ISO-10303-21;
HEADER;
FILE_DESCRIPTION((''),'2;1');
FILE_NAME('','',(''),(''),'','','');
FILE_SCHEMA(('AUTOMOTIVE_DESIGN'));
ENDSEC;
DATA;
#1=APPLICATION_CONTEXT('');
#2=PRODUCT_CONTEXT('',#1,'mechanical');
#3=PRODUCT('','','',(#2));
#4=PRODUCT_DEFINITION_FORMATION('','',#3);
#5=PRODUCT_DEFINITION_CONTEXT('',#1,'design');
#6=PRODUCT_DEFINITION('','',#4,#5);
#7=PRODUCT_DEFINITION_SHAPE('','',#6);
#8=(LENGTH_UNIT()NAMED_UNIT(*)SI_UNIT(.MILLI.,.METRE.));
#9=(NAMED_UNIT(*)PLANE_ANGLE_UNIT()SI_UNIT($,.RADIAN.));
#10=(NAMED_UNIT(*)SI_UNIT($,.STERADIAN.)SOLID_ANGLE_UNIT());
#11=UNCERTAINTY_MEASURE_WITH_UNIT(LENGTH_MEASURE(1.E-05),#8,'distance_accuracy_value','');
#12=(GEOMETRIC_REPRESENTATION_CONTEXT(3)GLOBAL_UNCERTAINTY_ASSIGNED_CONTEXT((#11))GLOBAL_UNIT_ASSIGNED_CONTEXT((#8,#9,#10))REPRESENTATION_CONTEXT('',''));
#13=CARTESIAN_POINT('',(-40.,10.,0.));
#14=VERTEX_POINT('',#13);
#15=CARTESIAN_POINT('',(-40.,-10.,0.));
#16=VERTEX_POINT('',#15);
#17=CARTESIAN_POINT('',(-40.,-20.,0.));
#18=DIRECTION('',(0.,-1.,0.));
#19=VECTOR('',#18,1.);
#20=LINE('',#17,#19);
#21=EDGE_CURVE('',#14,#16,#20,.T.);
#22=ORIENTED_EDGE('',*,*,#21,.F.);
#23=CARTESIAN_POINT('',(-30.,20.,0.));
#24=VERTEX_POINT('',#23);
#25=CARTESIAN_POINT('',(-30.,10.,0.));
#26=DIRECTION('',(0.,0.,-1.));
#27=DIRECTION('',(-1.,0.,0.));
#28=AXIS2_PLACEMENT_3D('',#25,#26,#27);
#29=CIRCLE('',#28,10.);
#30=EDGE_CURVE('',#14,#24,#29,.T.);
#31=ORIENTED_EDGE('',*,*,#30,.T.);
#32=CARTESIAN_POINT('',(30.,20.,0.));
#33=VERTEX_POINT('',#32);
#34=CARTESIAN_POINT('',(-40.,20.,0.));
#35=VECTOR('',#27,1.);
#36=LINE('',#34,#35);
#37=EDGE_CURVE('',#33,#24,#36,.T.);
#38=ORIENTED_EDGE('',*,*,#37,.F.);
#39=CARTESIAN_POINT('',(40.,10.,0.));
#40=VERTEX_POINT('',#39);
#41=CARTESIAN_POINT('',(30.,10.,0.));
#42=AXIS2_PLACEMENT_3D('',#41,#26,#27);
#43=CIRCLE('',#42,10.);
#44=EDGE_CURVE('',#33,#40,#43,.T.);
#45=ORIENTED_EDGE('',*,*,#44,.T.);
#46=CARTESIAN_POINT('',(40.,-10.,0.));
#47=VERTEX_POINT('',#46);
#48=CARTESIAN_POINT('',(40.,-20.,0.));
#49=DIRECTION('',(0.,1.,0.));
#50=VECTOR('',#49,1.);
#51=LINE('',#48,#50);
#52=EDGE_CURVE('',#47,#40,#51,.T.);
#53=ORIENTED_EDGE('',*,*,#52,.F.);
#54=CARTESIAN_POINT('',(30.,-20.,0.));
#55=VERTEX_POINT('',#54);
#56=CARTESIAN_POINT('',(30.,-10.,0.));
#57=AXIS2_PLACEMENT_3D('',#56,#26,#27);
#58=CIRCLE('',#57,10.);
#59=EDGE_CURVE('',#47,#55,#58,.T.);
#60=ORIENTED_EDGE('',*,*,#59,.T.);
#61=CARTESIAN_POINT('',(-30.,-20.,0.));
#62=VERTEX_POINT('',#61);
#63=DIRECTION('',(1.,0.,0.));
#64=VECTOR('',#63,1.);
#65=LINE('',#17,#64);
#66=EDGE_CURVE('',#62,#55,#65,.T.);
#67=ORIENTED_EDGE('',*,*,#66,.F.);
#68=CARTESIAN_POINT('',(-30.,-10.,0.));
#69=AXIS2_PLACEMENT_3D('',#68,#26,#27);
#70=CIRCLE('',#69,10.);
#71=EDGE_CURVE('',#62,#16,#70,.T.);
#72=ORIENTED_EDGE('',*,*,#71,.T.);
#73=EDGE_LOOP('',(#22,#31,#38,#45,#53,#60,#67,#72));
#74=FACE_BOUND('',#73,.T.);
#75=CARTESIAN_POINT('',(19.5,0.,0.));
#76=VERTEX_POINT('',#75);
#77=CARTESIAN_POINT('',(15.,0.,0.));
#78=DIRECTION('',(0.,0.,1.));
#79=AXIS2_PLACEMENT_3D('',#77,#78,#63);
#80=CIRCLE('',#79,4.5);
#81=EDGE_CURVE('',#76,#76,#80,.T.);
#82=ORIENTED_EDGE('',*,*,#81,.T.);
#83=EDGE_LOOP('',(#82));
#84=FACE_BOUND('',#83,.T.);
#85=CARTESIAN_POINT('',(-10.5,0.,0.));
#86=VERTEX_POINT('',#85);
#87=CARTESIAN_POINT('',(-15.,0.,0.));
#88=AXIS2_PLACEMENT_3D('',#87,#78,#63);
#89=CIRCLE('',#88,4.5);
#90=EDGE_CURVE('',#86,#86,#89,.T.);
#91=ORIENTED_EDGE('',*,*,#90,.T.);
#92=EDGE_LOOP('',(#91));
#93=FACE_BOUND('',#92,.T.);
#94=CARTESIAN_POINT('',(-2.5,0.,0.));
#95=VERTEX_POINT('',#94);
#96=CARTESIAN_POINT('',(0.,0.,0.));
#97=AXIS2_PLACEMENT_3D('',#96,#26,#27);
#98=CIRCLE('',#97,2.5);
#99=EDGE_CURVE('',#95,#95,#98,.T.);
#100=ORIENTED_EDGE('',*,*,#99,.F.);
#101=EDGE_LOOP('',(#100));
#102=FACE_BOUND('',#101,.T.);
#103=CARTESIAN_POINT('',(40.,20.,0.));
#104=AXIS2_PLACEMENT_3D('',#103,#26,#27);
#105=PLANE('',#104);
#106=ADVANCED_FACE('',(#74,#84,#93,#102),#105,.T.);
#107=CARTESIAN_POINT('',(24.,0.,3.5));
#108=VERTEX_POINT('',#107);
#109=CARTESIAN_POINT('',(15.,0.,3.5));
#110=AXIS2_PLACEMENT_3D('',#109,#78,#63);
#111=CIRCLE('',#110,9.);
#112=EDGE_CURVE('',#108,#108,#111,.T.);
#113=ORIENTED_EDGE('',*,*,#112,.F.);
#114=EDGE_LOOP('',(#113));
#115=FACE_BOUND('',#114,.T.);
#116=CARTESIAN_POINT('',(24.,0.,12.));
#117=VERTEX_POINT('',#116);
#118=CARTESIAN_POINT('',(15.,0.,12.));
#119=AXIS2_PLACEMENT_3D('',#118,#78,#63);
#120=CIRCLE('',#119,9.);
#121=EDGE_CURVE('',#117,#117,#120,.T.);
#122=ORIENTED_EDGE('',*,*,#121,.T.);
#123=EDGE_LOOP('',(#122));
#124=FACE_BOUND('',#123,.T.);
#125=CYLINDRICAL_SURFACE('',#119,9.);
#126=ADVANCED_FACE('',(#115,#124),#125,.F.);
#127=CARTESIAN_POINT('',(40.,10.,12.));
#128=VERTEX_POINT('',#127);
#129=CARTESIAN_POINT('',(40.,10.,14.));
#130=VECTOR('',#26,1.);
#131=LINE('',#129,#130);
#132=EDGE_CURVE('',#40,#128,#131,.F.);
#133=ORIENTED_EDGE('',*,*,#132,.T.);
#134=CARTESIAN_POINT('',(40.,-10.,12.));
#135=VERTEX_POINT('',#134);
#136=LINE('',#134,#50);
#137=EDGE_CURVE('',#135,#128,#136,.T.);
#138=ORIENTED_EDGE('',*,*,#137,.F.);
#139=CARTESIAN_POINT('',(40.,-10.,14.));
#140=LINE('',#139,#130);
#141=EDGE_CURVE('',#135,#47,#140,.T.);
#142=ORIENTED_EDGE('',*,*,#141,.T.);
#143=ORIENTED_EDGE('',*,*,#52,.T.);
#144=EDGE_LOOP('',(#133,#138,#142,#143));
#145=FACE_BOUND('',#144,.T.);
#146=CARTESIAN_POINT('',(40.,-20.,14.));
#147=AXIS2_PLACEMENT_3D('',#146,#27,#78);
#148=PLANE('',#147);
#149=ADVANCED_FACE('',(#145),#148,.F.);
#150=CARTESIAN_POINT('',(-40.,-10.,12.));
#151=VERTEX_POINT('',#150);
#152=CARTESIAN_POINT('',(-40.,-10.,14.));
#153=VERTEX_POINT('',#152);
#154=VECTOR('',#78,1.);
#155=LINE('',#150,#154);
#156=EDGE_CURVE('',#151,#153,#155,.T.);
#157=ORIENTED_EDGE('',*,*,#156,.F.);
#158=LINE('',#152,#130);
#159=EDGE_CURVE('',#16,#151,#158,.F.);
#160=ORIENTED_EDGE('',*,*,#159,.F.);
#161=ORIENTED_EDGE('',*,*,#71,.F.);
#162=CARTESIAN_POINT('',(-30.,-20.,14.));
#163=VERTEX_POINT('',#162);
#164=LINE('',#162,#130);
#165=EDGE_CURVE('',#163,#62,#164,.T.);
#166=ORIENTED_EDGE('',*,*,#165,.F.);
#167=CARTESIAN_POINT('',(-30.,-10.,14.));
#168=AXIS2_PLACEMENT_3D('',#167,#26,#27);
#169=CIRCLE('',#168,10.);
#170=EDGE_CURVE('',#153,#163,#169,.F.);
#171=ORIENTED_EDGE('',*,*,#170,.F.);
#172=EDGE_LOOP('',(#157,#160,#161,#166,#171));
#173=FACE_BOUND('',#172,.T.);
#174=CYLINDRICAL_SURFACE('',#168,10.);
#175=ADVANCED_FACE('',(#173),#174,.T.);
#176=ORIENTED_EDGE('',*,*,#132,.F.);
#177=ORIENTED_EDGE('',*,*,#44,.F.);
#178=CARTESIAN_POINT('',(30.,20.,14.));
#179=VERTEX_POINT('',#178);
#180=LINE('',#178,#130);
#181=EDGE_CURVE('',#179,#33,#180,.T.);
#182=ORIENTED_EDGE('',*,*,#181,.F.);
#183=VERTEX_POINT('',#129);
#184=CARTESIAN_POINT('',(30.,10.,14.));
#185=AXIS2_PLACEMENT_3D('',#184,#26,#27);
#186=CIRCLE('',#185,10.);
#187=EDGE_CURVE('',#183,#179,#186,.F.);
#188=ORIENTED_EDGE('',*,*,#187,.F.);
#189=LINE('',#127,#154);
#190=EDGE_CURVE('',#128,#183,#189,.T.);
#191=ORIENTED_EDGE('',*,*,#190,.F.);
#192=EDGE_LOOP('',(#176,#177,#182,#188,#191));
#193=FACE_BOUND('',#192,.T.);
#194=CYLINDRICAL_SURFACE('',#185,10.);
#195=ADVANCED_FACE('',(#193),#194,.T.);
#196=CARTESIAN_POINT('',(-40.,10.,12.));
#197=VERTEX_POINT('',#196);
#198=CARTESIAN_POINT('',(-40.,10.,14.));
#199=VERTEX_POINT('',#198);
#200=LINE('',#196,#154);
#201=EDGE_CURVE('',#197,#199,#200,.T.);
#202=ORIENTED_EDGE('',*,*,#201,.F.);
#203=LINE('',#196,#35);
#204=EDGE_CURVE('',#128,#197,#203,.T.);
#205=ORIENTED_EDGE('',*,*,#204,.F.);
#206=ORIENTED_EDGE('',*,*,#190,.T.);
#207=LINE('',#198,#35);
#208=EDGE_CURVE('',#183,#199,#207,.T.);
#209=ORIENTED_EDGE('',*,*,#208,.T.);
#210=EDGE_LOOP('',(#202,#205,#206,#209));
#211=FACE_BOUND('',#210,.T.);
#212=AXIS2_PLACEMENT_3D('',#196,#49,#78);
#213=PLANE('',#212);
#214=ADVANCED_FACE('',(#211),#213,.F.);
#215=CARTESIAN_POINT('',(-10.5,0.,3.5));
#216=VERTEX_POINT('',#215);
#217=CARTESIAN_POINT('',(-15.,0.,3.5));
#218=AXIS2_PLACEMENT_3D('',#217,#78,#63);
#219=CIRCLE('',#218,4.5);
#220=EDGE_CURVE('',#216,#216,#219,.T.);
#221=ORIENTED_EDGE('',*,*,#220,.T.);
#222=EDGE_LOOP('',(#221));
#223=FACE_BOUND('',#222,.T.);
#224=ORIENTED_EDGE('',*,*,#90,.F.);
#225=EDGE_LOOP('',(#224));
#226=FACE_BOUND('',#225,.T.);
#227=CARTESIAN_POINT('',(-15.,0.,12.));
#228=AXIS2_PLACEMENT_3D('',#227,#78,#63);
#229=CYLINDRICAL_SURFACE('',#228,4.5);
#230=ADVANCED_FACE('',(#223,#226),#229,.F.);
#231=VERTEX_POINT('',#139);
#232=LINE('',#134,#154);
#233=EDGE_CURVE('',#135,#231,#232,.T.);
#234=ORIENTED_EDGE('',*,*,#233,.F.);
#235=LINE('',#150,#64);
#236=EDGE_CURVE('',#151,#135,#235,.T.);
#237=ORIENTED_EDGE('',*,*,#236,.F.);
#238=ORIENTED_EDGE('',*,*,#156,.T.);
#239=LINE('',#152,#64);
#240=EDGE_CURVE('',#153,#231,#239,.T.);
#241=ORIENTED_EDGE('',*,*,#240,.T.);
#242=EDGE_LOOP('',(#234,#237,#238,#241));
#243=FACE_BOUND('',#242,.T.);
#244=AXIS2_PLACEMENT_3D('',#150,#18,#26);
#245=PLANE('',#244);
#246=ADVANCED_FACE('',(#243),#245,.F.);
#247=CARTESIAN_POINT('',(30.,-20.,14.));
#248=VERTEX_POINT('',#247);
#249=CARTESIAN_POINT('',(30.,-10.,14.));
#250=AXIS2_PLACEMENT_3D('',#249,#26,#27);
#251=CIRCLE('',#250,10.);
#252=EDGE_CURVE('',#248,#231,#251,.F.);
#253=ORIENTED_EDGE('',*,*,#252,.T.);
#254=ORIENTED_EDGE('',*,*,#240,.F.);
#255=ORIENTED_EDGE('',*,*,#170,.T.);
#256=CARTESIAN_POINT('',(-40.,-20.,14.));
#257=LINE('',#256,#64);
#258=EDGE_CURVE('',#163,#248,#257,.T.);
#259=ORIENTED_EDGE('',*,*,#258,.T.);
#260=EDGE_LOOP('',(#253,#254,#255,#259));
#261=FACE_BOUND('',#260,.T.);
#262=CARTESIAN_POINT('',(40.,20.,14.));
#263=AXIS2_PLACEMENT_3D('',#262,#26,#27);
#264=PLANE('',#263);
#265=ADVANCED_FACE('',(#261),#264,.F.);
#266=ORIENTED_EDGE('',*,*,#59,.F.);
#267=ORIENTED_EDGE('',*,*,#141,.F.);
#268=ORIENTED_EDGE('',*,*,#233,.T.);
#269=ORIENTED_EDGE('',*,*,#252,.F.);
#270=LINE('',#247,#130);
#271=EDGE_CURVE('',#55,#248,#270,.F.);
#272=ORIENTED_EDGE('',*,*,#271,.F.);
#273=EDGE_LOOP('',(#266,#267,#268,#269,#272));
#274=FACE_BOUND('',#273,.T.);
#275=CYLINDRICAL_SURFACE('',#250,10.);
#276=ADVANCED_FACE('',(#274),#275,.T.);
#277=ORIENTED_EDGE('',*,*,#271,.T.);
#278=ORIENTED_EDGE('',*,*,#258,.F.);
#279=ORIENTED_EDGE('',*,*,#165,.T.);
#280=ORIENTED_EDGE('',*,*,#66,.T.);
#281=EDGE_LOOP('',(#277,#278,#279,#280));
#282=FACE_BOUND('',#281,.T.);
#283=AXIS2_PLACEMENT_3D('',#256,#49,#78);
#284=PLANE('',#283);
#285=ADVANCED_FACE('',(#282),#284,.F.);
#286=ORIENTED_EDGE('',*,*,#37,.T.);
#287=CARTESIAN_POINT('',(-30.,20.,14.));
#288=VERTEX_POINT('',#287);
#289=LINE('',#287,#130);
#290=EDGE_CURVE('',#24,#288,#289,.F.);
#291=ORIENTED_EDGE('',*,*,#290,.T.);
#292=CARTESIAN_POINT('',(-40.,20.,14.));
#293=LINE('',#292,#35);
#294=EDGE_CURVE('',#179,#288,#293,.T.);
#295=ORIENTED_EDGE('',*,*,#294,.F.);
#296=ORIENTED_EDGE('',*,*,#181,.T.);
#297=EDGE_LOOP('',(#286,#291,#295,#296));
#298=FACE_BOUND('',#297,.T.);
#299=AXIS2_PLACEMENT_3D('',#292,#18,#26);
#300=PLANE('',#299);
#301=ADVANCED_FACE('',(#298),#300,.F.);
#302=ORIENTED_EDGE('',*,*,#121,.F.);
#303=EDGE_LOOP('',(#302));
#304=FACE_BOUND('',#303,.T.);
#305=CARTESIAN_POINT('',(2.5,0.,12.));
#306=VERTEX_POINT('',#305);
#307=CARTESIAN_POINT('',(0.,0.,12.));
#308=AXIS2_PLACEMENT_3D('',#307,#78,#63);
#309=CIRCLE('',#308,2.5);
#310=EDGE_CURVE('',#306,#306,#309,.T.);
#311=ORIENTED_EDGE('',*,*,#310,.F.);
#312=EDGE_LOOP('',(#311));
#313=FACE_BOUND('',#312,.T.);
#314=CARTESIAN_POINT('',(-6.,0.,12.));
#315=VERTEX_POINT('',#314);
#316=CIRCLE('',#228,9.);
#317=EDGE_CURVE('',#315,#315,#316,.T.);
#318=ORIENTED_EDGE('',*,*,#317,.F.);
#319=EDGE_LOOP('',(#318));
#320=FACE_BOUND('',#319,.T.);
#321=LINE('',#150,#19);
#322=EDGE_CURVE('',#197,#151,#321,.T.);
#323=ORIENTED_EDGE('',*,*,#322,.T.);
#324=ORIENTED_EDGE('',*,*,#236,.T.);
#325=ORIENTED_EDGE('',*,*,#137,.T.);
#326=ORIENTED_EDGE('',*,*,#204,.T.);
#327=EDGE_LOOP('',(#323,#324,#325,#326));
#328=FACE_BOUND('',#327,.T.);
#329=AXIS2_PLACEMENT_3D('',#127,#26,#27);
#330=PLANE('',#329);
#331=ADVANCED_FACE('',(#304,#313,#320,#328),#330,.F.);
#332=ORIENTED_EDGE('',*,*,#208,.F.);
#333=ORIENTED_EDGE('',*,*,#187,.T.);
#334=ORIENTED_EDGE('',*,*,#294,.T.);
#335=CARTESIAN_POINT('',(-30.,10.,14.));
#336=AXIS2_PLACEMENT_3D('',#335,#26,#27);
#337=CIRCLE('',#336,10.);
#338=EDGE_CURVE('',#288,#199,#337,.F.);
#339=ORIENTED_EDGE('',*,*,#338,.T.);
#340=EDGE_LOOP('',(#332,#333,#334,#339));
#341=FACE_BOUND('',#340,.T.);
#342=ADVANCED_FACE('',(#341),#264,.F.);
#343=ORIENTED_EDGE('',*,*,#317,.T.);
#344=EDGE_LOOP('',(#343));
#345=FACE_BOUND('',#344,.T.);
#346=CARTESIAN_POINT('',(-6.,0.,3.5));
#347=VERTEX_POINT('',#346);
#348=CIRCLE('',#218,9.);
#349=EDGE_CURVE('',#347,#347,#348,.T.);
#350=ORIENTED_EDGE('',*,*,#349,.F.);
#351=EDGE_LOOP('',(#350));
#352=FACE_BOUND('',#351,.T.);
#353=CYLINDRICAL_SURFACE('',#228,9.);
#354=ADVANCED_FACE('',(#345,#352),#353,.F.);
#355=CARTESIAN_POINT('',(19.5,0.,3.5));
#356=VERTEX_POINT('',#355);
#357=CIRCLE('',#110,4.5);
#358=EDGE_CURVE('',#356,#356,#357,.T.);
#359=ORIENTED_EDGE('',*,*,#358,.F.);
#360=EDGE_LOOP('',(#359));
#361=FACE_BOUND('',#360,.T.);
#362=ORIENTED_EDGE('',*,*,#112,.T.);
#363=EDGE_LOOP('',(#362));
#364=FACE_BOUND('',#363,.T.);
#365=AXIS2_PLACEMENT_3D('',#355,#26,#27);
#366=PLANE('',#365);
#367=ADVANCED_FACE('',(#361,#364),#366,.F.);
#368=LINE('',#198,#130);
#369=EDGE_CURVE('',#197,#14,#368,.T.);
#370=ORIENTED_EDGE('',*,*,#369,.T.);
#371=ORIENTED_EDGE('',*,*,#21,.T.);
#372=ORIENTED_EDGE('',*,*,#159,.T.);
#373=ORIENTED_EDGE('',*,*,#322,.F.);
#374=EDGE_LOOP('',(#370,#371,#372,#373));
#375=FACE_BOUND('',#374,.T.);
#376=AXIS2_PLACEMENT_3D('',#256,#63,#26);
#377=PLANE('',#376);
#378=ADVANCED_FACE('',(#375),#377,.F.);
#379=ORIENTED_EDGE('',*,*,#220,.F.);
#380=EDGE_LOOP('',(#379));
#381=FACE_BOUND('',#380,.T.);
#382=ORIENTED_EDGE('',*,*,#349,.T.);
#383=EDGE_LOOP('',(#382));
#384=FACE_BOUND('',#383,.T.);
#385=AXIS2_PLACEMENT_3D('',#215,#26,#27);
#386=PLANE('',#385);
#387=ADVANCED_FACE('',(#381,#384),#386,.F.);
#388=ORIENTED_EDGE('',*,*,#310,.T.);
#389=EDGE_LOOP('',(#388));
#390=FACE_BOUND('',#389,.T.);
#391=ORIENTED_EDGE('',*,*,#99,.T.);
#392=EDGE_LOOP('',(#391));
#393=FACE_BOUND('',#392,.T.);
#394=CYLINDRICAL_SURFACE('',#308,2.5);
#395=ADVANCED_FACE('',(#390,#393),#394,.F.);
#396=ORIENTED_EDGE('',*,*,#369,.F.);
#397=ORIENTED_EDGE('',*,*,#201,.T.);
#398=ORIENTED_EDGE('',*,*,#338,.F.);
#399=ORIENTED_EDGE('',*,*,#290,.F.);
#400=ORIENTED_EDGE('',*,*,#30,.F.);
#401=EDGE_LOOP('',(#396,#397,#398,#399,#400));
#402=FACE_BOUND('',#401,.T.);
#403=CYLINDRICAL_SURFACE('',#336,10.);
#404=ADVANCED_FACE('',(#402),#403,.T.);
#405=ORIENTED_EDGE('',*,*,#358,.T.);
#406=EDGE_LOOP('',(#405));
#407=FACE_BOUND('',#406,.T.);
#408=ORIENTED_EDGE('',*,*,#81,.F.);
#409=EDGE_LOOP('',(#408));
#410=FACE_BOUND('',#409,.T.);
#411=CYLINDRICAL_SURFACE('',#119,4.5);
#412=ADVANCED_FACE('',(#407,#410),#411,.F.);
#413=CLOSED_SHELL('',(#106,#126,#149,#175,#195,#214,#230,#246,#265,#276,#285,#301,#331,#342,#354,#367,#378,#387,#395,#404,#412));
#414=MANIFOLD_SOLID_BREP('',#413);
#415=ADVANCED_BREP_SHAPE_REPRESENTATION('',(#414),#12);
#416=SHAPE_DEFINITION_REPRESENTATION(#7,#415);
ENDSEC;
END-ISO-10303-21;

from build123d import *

# Parameters (mm, degrees)
SKETCH_1_W                   = 80
SKETCH_1_H                   = 40
EXTRUDE_1_DEPTH              = 14
SKETCH_2_W                   = 80
SKETCH_2_H                   = 20
CUT_EXTRUDE_1_DEPTH          = 2
HOLE_WIZARD_M6_1_D           = 5
HOLE_WIZARD_M6_1_DEPTH       = 15
HOLE_WIZARD_M6_1_TIP         = 1.502151548
HOLE_WIZARD_M8_1_D           = 9
HOLE_WIZARD_M8_1_CBORE_D     = 18
HOLE_WIZARD_M8_1_CBORE_DEPTH = 8.5
FILLET_1_R                   = 10


with BuildPart() as part:
    # 草图1 → 凸台-拉伸1 (new body)
    with BuildSketch(Plane.XY):
        Rectangle(SKETCH_1_W, SKETCH_1_H)
    extrude(amount=EXTRUDE_1_DEPTH)

    # 草图2 → 切除-拉伸1 (cut)
    with BuildSketch(Plane.XY.offset(14)):
        Rectangle(SKETCH_2_W, SKETCH_2_H)
    extrude(amount=-CUT_EXTRUDE_1_DEPTH, mode=Mode.SUBTRACT)

    # M6 螺纹孔1
    with Locations(Plane.XY.offset(12)):
        with Locations((0, 0)):
            Hole(HOLE_WIZARD_M6_1_D / 2, depth=HOLE_WIZARD_M6_1_DEPTH)
            with Locations((0, 0, -(HOLE_WIZARD_M6_1_DEPTH + HOLE_WIZARD_M6_1_TIP / 2))):  # 118° drill point
                Cone(0, HOLE_WIZARD_M6_1_D / 2, HOLE_WIZARD_M6_1_TIP, mode=Mode.SUBTRACT)

    # M8 六角头螺栓的柱形沉头孔1 (through all)
    with Locations(Plane.XY.offset(12)):
        with Locations((-15, 0), (15, 0)):
            CounterBoreHole(HOLE_WIZARD_M8_1_D / 2, HOLE_WIZARD_M8_1_CBORE_D / 2, HOLE_WIZARD_M8_1_CBORE_DEPTH)

    # 圆角1
    fillet_1_edges = [part.edges().sort_by_distance(p)[0] for p in [
        (-40, 20, 7),
        (40, 20, 7),
        (40, -20, 7),
        (-40, -20, 7),
    ]]
    fillet(fillet_1_edges, radius=FILLET_1_R - 0.0001)  # a hair under: the kernel refuses the full size


solid = part.part
